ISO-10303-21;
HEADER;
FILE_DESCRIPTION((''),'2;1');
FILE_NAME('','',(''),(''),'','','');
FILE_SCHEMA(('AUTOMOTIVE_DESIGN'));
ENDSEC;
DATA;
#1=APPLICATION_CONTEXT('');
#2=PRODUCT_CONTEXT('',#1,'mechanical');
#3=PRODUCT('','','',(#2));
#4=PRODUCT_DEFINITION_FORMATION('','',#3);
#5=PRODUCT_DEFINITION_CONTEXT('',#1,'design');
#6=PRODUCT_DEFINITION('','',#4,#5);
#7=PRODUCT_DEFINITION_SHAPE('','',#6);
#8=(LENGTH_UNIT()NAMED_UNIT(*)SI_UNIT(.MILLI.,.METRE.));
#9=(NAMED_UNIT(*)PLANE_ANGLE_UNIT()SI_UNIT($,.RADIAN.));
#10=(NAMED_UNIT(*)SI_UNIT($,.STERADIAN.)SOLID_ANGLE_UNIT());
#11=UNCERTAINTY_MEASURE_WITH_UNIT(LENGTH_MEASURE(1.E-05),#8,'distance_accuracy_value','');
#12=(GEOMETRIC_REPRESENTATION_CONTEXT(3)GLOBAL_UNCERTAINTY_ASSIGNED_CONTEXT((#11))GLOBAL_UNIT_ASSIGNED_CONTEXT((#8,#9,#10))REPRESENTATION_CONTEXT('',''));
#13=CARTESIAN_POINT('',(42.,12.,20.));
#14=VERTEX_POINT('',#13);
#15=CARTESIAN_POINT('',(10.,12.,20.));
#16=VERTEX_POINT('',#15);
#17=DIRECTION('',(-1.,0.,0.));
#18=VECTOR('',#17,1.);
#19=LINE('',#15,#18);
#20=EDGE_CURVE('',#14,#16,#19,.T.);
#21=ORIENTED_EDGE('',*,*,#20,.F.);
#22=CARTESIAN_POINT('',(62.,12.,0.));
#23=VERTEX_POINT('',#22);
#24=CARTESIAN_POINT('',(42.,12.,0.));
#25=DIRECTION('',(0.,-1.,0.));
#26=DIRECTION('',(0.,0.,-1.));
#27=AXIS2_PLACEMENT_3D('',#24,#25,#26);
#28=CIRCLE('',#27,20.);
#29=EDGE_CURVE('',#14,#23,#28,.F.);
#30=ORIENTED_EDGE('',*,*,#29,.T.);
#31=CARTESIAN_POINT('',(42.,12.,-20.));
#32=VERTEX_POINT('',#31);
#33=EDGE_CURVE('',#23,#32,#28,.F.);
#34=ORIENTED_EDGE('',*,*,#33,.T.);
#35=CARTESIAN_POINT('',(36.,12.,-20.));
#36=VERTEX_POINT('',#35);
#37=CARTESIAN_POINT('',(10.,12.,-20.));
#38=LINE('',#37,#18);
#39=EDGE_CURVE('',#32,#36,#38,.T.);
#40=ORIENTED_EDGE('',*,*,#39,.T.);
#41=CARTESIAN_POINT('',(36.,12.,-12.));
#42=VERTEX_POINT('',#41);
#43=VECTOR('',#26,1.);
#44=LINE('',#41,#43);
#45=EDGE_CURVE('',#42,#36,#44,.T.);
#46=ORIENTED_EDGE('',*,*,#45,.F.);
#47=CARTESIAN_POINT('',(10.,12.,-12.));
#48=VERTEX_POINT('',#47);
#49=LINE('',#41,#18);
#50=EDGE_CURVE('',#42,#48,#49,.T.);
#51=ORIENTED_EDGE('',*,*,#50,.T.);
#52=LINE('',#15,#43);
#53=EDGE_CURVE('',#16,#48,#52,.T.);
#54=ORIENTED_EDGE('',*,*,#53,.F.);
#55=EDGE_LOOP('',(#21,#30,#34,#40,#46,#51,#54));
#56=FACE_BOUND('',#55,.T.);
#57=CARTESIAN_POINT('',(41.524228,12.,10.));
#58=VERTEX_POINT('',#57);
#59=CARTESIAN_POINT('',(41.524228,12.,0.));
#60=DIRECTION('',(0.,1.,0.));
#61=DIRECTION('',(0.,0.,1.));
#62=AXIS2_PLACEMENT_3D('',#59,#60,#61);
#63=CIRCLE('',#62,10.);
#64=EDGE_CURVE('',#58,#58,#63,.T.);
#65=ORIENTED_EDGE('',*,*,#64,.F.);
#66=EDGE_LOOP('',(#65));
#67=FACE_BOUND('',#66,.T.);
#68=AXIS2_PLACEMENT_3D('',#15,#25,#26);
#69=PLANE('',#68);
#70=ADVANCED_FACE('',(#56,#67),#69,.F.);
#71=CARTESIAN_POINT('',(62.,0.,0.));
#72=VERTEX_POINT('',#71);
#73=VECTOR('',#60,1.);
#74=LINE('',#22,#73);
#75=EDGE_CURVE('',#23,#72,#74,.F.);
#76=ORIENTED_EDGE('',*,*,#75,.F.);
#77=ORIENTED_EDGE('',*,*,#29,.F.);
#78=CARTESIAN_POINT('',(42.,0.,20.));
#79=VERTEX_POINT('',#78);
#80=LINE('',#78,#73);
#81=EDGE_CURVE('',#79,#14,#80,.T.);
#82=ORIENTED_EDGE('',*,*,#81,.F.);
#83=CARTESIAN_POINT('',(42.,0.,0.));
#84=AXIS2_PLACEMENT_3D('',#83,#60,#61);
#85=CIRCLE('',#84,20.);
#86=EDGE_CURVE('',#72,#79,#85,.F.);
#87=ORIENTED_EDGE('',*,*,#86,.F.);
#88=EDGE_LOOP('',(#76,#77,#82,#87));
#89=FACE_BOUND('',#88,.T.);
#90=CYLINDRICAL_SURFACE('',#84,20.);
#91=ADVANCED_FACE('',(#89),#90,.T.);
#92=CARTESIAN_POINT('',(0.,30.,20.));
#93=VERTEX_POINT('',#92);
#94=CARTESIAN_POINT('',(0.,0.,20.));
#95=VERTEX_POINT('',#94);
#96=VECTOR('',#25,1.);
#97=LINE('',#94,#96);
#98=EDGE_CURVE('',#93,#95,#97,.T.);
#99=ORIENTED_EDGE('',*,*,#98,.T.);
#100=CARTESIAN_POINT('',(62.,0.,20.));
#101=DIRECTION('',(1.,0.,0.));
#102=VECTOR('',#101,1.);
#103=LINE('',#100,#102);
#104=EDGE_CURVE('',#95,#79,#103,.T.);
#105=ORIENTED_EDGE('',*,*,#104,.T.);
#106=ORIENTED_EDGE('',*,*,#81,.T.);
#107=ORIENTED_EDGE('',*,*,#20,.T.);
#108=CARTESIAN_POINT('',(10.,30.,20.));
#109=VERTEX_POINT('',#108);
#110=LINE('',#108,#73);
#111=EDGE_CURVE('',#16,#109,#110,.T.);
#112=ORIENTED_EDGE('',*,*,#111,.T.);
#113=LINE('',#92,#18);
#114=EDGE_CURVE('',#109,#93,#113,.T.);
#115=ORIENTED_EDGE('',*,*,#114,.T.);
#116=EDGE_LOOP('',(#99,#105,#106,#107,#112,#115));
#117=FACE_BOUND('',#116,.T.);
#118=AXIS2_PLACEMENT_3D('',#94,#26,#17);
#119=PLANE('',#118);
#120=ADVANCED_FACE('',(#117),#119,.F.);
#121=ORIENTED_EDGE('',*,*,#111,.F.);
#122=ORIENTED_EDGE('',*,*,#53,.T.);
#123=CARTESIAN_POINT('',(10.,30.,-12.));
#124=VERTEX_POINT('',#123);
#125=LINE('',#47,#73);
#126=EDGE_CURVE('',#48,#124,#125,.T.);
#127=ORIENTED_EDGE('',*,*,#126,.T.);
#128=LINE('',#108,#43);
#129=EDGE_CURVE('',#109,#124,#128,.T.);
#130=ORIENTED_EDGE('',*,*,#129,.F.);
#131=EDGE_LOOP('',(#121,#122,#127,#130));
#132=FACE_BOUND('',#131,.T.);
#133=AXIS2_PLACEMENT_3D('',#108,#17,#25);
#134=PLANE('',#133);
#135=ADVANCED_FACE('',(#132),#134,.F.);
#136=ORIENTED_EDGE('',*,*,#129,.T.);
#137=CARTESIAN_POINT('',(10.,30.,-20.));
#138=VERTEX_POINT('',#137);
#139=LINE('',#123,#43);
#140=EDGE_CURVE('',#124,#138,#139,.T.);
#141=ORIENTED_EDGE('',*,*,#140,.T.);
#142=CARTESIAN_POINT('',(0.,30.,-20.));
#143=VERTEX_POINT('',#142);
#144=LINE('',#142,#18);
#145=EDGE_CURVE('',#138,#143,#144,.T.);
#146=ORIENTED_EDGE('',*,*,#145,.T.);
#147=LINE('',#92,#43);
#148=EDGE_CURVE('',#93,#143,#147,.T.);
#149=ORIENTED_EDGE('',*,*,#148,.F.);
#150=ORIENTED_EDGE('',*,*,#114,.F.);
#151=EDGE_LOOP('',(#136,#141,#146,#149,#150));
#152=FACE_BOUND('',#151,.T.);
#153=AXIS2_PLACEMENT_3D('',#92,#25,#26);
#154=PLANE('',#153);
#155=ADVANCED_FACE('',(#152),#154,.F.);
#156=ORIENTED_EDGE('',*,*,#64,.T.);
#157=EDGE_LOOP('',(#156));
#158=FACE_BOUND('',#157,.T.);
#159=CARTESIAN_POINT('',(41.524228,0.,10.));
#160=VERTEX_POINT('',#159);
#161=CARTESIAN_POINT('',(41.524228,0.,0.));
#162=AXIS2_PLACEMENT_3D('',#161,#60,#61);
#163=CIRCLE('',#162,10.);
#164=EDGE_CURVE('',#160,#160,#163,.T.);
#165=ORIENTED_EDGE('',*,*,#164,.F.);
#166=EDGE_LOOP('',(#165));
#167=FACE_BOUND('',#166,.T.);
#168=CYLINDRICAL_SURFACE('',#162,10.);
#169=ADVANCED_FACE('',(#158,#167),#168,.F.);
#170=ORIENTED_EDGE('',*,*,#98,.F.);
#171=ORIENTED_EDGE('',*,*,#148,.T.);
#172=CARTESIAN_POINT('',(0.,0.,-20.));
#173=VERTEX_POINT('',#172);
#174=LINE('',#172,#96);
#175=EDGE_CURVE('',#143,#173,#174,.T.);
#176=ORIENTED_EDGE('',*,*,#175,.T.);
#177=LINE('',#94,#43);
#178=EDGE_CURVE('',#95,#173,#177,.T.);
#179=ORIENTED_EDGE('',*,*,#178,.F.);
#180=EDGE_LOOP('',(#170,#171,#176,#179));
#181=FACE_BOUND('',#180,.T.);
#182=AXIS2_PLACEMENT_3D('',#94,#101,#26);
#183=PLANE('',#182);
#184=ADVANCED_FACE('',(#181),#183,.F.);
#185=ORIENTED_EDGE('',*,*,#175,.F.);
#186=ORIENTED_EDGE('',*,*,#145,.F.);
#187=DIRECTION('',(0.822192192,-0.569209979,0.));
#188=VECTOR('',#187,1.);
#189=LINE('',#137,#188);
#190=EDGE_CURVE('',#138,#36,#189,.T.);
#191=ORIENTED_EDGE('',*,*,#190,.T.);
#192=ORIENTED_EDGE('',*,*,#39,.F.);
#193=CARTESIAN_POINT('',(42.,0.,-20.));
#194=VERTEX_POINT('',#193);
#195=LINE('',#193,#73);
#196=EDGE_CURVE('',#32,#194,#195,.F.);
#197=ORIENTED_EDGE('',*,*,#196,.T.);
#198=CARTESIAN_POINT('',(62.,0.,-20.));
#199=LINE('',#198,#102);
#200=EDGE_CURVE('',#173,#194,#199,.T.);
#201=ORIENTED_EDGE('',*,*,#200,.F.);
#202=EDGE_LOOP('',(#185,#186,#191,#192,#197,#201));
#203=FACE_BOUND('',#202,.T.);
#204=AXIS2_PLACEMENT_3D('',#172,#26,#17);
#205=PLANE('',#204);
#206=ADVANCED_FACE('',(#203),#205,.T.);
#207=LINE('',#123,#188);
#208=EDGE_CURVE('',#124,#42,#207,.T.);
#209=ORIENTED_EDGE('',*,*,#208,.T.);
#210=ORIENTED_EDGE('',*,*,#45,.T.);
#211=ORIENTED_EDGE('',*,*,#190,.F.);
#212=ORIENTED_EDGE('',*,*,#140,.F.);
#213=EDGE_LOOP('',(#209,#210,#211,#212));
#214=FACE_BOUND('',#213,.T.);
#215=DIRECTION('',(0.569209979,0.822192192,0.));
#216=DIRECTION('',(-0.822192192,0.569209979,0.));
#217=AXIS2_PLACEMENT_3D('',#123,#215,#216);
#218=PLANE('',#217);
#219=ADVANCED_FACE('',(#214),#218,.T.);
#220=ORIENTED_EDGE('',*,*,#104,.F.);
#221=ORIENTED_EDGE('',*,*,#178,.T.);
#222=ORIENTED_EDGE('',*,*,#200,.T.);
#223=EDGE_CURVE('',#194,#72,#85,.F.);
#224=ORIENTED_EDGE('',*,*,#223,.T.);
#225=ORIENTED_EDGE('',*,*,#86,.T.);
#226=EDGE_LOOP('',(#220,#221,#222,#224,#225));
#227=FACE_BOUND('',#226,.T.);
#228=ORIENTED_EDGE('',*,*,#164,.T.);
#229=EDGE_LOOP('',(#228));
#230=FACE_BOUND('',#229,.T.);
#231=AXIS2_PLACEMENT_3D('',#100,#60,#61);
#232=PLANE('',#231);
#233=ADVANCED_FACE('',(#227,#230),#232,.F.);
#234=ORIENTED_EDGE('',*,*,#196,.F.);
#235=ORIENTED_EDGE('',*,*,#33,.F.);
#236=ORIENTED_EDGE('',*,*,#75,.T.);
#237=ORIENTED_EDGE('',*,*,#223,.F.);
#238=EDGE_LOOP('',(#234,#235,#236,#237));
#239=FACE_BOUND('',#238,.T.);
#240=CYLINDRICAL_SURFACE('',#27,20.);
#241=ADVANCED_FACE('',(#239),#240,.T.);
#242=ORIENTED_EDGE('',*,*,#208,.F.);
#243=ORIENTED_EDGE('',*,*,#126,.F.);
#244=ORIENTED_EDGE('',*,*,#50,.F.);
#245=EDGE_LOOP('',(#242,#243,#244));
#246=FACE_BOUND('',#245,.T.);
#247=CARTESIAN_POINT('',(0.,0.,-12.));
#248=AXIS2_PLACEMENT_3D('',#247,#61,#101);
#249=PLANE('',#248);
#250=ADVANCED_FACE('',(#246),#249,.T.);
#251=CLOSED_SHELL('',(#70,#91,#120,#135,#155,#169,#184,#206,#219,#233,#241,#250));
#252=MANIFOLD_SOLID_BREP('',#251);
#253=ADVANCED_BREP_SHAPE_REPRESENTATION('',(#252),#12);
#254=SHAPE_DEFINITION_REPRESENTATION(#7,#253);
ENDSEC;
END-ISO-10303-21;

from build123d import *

# Parameters (mm, degrees)
EXTRUDE_1_DEPTH     = 20
FILLET_1_R          = 20
SKETCH_2_R          = 10
CUT_EXTRUDE_1_DEPTH = 68.586980995
EXTRUDE_2_DEPTH     = 8


with BuildPart() as part:
    # 草圖1 → 填料-伸長1 (new, symmetric)
    with BuildSketch(Plane.XY):
        Polygon((0, 0), (0, 30), (10, 30), (10, 12), (62, 12), (62, 0), align=None)
    extrude(amount=EXTRUDE_1_DEPTH, both=True)

    # 圓角1
    fillet_1_edges = [part.edges().sort_by_distance(p)[0] for p in [
        (62, 6, -20),
        (62, 6, 20),
    ]]
    fillet(fillet_1_edges, radius=FILLET_1_R - 0.0001)  # a hair under: the kernel refuses the full size

    # 草圖2 → 除料-伸長1 (cut, through all)
    with BuildSketch(Plane(origin=(0, 12, 0), x_dir=(1, 0, 0), z_dir=(0, 1, 0))):
        with Locations(Location((41.524228064, 0, 0), (0, 0, 270))):
            Circle(SKETCH_2_R)
    extrude(amount=-CUT_EXTRUDE_1_DEPTH, mode=Mode.SUBTRACT)

    # 草圖4 → 填料-伸長2 (add)
    with BuildSketch(Plane(origin=(0, 0, -20), x_dir=(-1, 0, 0), z_dir=(0, 0, -1))):
        Polygon((-10, 30), (-36, 12), (-10, 12), align=None)
    extrude(amount=-EXTRUDE_2_DEPTH)


solid = part.part
